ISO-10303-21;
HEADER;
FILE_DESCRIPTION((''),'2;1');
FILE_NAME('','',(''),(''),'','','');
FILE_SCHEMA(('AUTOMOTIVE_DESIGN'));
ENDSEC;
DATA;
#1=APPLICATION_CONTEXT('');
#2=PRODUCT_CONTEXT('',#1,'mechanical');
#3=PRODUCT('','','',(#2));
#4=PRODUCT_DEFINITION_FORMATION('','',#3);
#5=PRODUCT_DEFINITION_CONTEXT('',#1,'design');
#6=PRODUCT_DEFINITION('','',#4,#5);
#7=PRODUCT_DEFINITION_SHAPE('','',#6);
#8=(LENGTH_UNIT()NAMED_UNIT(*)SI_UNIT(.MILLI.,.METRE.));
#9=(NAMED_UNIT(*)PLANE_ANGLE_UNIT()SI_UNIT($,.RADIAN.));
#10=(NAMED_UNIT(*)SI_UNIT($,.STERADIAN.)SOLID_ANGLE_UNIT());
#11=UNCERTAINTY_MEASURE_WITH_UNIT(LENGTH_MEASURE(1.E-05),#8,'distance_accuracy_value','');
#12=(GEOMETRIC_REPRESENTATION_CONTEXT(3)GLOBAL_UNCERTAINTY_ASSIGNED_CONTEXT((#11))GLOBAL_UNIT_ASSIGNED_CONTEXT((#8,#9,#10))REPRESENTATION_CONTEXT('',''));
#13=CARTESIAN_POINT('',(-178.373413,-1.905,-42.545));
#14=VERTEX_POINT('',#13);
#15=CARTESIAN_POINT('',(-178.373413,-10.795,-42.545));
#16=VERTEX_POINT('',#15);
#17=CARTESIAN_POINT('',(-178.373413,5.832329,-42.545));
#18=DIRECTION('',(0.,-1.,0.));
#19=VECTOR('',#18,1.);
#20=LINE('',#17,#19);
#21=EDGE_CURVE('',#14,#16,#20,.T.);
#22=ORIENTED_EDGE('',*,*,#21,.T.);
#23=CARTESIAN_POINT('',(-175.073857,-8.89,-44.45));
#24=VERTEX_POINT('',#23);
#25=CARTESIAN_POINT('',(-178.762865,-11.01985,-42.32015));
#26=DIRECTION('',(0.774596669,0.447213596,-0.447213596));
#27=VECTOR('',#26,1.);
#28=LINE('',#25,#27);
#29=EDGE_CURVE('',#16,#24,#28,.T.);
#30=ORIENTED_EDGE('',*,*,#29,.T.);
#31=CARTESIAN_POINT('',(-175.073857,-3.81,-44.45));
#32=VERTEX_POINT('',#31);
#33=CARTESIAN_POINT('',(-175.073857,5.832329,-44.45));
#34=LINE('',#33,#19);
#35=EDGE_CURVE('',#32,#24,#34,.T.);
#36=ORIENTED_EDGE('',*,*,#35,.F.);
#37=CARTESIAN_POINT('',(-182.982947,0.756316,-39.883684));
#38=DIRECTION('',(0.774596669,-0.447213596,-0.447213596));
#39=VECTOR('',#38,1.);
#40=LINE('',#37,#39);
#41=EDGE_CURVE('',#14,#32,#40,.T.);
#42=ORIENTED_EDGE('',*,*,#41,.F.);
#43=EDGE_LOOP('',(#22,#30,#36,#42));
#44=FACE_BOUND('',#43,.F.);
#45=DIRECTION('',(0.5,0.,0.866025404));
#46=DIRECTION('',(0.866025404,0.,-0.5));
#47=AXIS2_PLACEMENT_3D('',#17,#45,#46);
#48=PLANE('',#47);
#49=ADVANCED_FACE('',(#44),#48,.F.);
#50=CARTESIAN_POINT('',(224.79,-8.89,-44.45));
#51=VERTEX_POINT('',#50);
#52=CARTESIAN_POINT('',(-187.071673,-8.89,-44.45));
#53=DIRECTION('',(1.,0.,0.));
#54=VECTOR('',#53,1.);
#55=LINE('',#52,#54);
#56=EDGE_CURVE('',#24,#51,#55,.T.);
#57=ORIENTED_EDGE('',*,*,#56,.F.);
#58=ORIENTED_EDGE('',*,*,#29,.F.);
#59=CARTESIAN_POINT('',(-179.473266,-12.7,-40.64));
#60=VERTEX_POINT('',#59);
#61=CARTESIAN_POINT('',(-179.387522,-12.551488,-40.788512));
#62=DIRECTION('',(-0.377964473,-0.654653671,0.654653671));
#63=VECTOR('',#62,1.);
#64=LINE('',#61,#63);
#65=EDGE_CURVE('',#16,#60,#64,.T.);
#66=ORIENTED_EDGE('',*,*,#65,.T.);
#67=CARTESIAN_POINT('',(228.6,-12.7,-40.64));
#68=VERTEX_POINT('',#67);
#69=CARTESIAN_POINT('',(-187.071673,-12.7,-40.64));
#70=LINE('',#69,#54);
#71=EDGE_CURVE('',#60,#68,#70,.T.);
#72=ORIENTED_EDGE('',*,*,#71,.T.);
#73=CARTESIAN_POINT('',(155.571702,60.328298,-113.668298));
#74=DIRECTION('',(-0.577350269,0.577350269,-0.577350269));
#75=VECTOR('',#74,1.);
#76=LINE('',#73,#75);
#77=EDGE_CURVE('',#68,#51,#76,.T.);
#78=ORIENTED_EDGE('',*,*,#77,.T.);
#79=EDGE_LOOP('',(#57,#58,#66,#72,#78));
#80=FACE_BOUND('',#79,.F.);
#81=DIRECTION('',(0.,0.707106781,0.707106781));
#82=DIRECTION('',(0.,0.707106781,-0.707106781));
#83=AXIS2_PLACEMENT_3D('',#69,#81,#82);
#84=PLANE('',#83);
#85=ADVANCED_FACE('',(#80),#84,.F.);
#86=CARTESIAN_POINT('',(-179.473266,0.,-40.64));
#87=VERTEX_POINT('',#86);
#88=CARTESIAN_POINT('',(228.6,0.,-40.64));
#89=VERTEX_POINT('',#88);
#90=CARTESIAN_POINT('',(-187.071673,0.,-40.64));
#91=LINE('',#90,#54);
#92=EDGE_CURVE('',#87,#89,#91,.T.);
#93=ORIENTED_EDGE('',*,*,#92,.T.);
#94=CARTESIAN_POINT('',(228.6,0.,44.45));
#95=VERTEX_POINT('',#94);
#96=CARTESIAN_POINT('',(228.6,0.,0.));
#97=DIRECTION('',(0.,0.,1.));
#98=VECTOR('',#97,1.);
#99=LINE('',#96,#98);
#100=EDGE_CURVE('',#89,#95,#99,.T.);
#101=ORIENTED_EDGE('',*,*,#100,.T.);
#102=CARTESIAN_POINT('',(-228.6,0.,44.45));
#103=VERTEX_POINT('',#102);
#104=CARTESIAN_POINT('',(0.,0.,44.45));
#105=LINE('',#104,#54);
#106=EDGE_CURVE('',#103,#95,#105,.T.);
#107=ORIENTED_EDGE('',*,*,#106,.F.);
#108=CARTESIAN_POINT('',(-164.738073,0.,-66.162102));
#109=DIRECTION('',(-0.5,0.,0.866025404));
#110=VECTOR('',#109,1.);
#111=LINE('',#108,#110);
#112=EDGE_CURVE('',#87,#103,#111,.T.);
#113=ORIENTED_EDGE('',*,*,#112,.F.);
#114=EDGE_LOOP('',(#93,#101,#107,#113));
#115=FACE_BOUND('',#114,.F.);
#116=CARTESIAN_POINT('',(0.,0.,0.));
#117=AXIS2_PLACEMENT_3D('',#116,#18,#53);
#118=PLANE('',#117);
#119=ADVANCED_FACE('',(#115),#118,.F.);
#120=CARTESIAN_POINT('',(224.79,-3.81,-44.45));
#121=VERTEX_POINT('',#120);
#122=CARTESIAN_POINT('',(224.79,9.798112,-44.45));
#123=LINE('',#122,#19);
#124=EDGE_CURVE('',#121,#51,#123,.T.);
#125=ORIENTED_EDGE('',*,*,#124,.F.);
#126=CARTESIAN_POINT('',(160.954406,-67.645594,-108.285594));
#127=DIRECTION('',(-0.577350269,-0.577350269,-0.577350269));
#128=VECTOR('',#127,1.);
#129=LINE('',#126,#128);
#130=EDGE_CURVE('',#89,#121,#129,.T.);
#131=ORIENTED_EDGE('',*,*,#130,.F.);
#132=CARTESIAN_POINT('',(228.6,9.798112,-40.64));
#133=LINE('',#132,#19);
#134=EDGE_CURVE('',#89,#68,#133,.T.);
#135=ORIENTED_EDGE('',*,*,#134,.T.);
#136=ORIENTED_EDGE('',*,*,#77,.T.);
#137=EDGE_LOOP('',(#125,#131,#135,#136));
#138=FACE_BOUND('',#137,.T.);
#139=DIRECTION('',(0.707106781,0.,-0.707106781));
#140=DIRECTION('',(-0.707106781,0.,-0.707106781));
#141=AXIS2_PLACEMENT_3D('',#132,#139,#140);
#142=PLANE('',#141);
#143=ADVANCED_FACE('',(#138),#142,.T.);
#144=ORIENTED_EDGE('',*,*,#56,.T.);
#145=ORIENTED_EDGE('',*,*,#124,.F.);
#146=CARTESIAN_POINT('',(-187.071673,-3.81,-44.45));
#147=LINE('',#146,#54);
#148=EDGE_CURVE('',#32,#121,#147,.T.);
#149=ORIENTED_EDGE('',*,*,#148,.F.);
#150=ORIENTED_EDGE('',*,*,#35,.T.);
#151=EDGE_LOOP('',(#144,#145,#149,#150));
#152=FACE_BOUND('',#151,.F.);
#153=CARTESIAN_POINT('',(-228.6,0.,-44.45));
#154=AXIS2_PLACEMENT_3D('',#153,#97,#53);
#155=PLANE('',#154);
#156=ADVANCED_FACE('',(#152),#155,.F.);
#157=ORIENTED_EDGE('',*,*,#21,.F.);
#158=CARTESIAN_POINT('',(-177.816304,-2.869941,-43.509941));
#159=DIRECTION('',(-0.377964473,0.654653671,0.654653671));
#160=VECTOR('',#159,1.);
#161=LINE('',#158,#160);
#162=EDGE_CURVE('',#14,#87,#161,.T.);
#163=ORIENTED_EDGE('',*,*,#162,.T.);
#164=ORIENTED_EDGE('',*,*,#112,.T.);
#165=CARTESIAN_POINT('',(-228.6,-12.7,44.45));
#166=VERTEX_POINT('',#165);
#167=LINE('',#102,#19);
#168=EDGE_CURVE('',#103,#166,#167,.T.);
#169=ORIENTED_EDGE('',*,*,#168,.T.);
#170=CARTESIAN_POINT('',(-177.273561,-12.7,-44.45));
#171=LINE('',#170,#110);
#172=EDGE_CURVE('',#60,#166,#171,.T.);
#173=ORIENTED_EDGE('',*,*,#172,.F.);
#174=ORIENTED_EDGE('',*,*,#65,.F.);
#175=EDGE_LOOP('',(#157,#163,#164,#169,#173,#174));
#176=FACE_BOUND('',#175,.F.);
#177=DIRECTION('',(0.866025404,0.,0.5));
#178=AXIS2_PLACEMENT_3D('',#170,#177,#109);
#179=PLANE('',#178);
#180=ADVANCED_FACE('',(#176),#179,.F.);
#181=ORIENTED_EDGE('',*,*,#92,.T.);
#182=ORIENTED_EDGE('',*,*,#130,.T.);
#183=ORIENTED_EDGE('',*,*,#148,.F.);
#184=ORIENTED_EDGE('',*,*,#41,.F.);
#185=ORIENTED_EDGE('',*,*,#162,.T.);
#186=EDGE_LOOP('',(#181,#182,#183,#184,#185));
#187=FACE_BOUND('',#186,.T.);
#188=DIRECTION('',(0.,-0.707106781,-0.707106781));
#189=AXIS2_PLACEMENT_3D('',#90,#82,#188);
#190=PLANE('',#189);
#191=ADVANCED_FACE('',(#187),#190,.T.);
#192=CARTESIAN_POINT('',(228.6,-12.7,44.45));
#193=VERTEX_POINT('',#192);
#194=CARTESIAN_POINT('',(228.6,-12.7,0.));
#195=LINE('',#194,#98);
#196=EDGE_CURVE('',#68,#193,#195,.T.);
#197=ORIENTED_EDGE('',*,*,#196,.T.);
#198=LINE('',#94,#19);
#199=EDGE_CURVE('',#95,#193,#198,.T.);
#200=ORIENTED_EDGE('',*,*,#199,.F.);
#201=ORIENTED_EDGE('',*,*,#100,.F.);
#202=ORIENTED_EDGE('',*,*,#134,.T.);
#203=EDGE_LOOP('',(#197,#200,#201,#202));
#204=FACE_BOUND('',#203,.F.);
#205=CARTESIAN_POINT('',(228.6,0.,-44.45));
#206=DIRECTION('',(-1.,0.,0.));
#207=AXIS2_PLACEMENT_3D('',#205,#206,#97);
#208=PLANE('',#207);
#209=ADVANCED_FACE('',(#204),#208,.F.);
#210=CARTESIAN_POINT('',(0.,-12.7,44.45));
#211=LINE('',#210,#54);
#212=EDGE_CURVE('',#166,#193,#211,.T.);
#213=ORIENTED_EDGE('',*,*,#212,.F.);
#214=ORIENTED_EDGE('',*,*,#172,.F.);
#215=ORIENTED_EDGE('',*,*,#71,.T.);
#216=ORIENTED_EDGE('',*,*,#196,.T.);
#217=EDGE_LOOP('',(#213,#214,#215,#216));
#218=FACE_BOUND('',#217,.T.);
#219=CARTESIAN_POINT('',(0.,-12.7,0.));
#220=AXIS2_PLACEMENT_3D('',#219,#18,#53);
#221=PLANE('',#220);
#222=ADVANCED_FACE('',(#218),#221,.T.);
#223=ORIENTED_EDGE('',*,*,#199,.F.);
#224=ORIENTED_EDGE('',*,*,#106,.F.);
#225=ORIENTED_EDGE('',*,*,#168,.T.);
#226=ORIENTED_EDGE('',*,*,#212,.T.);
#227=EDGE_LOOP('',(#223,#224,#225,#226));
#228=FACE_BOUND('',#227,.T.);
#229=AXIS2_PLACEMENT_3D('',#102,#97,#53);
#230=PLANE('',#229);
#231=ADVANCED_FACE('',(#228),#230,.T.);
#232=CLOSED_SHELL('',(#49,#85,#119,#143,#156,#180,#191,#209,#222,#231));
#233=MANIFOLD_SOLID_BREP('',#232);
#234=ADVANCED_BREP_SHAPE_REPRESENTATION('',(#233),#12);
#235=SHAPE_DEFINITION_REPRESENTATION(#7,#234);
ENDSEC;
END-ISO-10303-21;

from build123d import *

# Parameters (mm, degrees)
F0_W        = 457.2
F0_H        = 88.9
F1_DEPTH    = 12.7
F3_DEPTH    = 12.701
F4_T1_DEPTH = 425.4697854373
F4_T3_DEPTH = 32.2962243683
F4_T5_DEPTH = 24.3646579033


# Not quite as in the source:
# - a fillet or chamfer that OpenCascade refuses, or shapes differently, is made with other operations: its cross-section is extruded or revolved along the edge and cut away or added
# - a feature names something its author has since deleted; it is built from what else it names


with BuildPart() as f1:
    # F0 (on Front) → F1 (new body)
    with BuildSketch(Plane.XZ):
        Rectangle(F0_W, F0_H)
    extrude(amount=F1_DEPTH)

    # F2 (on face) → F3 (cut, through all)
    with BuildSketch(Plane.XZ.offset(12.7)):
        Polygon((-177.273561069, -44.45), (-228.6, 44.45), (-228.6, -44.45), align=None)
    extrude(amount=-F3_DEPTH, mode=Mode.SUBTRACT)

    # F4: chamfer of 3.81 on 4 edges, made by hand

    # F4_s2 → F4_t1 (cut)
    with BuildSketch(Plane.YZ.offset(-187.0716732532)):
        Polygon((0, -40.64), (-3.81, -44.45), (0, -44.45), align=None)
        Polygon((-12.7, -40.64), (-8.89, -44.45), (-12.7, -44.45), align=None)
    extrude(amount=F4_T1_DEPTH, mode=Mode.SUBTRACT)

    # F4_s4 → F4_t3 (cut)
    with BuildSketch(Plane.XZ.offset(-9.7981121842)):
        Polygon((228.6, -40.64), (224.79, -44.45), (228.6, -44.45), align=None)
    extrude(amount=F4_T3_DEPTH, mode=Mode.SUBTRACT)

    # F4_s6 → F4_t5 (cut)
    with BuildSketch(Plane.XZ.offset(-5.8323289516)):
        Polygon((-178.3734133318, -42.545), (-175.0738565434, -44.45), (-177.273561069, -44.45), align=None)
    extrude(amount=F4_T5_DEPTH, mode=Mode.SUBTRACT)


solid = f1.part
